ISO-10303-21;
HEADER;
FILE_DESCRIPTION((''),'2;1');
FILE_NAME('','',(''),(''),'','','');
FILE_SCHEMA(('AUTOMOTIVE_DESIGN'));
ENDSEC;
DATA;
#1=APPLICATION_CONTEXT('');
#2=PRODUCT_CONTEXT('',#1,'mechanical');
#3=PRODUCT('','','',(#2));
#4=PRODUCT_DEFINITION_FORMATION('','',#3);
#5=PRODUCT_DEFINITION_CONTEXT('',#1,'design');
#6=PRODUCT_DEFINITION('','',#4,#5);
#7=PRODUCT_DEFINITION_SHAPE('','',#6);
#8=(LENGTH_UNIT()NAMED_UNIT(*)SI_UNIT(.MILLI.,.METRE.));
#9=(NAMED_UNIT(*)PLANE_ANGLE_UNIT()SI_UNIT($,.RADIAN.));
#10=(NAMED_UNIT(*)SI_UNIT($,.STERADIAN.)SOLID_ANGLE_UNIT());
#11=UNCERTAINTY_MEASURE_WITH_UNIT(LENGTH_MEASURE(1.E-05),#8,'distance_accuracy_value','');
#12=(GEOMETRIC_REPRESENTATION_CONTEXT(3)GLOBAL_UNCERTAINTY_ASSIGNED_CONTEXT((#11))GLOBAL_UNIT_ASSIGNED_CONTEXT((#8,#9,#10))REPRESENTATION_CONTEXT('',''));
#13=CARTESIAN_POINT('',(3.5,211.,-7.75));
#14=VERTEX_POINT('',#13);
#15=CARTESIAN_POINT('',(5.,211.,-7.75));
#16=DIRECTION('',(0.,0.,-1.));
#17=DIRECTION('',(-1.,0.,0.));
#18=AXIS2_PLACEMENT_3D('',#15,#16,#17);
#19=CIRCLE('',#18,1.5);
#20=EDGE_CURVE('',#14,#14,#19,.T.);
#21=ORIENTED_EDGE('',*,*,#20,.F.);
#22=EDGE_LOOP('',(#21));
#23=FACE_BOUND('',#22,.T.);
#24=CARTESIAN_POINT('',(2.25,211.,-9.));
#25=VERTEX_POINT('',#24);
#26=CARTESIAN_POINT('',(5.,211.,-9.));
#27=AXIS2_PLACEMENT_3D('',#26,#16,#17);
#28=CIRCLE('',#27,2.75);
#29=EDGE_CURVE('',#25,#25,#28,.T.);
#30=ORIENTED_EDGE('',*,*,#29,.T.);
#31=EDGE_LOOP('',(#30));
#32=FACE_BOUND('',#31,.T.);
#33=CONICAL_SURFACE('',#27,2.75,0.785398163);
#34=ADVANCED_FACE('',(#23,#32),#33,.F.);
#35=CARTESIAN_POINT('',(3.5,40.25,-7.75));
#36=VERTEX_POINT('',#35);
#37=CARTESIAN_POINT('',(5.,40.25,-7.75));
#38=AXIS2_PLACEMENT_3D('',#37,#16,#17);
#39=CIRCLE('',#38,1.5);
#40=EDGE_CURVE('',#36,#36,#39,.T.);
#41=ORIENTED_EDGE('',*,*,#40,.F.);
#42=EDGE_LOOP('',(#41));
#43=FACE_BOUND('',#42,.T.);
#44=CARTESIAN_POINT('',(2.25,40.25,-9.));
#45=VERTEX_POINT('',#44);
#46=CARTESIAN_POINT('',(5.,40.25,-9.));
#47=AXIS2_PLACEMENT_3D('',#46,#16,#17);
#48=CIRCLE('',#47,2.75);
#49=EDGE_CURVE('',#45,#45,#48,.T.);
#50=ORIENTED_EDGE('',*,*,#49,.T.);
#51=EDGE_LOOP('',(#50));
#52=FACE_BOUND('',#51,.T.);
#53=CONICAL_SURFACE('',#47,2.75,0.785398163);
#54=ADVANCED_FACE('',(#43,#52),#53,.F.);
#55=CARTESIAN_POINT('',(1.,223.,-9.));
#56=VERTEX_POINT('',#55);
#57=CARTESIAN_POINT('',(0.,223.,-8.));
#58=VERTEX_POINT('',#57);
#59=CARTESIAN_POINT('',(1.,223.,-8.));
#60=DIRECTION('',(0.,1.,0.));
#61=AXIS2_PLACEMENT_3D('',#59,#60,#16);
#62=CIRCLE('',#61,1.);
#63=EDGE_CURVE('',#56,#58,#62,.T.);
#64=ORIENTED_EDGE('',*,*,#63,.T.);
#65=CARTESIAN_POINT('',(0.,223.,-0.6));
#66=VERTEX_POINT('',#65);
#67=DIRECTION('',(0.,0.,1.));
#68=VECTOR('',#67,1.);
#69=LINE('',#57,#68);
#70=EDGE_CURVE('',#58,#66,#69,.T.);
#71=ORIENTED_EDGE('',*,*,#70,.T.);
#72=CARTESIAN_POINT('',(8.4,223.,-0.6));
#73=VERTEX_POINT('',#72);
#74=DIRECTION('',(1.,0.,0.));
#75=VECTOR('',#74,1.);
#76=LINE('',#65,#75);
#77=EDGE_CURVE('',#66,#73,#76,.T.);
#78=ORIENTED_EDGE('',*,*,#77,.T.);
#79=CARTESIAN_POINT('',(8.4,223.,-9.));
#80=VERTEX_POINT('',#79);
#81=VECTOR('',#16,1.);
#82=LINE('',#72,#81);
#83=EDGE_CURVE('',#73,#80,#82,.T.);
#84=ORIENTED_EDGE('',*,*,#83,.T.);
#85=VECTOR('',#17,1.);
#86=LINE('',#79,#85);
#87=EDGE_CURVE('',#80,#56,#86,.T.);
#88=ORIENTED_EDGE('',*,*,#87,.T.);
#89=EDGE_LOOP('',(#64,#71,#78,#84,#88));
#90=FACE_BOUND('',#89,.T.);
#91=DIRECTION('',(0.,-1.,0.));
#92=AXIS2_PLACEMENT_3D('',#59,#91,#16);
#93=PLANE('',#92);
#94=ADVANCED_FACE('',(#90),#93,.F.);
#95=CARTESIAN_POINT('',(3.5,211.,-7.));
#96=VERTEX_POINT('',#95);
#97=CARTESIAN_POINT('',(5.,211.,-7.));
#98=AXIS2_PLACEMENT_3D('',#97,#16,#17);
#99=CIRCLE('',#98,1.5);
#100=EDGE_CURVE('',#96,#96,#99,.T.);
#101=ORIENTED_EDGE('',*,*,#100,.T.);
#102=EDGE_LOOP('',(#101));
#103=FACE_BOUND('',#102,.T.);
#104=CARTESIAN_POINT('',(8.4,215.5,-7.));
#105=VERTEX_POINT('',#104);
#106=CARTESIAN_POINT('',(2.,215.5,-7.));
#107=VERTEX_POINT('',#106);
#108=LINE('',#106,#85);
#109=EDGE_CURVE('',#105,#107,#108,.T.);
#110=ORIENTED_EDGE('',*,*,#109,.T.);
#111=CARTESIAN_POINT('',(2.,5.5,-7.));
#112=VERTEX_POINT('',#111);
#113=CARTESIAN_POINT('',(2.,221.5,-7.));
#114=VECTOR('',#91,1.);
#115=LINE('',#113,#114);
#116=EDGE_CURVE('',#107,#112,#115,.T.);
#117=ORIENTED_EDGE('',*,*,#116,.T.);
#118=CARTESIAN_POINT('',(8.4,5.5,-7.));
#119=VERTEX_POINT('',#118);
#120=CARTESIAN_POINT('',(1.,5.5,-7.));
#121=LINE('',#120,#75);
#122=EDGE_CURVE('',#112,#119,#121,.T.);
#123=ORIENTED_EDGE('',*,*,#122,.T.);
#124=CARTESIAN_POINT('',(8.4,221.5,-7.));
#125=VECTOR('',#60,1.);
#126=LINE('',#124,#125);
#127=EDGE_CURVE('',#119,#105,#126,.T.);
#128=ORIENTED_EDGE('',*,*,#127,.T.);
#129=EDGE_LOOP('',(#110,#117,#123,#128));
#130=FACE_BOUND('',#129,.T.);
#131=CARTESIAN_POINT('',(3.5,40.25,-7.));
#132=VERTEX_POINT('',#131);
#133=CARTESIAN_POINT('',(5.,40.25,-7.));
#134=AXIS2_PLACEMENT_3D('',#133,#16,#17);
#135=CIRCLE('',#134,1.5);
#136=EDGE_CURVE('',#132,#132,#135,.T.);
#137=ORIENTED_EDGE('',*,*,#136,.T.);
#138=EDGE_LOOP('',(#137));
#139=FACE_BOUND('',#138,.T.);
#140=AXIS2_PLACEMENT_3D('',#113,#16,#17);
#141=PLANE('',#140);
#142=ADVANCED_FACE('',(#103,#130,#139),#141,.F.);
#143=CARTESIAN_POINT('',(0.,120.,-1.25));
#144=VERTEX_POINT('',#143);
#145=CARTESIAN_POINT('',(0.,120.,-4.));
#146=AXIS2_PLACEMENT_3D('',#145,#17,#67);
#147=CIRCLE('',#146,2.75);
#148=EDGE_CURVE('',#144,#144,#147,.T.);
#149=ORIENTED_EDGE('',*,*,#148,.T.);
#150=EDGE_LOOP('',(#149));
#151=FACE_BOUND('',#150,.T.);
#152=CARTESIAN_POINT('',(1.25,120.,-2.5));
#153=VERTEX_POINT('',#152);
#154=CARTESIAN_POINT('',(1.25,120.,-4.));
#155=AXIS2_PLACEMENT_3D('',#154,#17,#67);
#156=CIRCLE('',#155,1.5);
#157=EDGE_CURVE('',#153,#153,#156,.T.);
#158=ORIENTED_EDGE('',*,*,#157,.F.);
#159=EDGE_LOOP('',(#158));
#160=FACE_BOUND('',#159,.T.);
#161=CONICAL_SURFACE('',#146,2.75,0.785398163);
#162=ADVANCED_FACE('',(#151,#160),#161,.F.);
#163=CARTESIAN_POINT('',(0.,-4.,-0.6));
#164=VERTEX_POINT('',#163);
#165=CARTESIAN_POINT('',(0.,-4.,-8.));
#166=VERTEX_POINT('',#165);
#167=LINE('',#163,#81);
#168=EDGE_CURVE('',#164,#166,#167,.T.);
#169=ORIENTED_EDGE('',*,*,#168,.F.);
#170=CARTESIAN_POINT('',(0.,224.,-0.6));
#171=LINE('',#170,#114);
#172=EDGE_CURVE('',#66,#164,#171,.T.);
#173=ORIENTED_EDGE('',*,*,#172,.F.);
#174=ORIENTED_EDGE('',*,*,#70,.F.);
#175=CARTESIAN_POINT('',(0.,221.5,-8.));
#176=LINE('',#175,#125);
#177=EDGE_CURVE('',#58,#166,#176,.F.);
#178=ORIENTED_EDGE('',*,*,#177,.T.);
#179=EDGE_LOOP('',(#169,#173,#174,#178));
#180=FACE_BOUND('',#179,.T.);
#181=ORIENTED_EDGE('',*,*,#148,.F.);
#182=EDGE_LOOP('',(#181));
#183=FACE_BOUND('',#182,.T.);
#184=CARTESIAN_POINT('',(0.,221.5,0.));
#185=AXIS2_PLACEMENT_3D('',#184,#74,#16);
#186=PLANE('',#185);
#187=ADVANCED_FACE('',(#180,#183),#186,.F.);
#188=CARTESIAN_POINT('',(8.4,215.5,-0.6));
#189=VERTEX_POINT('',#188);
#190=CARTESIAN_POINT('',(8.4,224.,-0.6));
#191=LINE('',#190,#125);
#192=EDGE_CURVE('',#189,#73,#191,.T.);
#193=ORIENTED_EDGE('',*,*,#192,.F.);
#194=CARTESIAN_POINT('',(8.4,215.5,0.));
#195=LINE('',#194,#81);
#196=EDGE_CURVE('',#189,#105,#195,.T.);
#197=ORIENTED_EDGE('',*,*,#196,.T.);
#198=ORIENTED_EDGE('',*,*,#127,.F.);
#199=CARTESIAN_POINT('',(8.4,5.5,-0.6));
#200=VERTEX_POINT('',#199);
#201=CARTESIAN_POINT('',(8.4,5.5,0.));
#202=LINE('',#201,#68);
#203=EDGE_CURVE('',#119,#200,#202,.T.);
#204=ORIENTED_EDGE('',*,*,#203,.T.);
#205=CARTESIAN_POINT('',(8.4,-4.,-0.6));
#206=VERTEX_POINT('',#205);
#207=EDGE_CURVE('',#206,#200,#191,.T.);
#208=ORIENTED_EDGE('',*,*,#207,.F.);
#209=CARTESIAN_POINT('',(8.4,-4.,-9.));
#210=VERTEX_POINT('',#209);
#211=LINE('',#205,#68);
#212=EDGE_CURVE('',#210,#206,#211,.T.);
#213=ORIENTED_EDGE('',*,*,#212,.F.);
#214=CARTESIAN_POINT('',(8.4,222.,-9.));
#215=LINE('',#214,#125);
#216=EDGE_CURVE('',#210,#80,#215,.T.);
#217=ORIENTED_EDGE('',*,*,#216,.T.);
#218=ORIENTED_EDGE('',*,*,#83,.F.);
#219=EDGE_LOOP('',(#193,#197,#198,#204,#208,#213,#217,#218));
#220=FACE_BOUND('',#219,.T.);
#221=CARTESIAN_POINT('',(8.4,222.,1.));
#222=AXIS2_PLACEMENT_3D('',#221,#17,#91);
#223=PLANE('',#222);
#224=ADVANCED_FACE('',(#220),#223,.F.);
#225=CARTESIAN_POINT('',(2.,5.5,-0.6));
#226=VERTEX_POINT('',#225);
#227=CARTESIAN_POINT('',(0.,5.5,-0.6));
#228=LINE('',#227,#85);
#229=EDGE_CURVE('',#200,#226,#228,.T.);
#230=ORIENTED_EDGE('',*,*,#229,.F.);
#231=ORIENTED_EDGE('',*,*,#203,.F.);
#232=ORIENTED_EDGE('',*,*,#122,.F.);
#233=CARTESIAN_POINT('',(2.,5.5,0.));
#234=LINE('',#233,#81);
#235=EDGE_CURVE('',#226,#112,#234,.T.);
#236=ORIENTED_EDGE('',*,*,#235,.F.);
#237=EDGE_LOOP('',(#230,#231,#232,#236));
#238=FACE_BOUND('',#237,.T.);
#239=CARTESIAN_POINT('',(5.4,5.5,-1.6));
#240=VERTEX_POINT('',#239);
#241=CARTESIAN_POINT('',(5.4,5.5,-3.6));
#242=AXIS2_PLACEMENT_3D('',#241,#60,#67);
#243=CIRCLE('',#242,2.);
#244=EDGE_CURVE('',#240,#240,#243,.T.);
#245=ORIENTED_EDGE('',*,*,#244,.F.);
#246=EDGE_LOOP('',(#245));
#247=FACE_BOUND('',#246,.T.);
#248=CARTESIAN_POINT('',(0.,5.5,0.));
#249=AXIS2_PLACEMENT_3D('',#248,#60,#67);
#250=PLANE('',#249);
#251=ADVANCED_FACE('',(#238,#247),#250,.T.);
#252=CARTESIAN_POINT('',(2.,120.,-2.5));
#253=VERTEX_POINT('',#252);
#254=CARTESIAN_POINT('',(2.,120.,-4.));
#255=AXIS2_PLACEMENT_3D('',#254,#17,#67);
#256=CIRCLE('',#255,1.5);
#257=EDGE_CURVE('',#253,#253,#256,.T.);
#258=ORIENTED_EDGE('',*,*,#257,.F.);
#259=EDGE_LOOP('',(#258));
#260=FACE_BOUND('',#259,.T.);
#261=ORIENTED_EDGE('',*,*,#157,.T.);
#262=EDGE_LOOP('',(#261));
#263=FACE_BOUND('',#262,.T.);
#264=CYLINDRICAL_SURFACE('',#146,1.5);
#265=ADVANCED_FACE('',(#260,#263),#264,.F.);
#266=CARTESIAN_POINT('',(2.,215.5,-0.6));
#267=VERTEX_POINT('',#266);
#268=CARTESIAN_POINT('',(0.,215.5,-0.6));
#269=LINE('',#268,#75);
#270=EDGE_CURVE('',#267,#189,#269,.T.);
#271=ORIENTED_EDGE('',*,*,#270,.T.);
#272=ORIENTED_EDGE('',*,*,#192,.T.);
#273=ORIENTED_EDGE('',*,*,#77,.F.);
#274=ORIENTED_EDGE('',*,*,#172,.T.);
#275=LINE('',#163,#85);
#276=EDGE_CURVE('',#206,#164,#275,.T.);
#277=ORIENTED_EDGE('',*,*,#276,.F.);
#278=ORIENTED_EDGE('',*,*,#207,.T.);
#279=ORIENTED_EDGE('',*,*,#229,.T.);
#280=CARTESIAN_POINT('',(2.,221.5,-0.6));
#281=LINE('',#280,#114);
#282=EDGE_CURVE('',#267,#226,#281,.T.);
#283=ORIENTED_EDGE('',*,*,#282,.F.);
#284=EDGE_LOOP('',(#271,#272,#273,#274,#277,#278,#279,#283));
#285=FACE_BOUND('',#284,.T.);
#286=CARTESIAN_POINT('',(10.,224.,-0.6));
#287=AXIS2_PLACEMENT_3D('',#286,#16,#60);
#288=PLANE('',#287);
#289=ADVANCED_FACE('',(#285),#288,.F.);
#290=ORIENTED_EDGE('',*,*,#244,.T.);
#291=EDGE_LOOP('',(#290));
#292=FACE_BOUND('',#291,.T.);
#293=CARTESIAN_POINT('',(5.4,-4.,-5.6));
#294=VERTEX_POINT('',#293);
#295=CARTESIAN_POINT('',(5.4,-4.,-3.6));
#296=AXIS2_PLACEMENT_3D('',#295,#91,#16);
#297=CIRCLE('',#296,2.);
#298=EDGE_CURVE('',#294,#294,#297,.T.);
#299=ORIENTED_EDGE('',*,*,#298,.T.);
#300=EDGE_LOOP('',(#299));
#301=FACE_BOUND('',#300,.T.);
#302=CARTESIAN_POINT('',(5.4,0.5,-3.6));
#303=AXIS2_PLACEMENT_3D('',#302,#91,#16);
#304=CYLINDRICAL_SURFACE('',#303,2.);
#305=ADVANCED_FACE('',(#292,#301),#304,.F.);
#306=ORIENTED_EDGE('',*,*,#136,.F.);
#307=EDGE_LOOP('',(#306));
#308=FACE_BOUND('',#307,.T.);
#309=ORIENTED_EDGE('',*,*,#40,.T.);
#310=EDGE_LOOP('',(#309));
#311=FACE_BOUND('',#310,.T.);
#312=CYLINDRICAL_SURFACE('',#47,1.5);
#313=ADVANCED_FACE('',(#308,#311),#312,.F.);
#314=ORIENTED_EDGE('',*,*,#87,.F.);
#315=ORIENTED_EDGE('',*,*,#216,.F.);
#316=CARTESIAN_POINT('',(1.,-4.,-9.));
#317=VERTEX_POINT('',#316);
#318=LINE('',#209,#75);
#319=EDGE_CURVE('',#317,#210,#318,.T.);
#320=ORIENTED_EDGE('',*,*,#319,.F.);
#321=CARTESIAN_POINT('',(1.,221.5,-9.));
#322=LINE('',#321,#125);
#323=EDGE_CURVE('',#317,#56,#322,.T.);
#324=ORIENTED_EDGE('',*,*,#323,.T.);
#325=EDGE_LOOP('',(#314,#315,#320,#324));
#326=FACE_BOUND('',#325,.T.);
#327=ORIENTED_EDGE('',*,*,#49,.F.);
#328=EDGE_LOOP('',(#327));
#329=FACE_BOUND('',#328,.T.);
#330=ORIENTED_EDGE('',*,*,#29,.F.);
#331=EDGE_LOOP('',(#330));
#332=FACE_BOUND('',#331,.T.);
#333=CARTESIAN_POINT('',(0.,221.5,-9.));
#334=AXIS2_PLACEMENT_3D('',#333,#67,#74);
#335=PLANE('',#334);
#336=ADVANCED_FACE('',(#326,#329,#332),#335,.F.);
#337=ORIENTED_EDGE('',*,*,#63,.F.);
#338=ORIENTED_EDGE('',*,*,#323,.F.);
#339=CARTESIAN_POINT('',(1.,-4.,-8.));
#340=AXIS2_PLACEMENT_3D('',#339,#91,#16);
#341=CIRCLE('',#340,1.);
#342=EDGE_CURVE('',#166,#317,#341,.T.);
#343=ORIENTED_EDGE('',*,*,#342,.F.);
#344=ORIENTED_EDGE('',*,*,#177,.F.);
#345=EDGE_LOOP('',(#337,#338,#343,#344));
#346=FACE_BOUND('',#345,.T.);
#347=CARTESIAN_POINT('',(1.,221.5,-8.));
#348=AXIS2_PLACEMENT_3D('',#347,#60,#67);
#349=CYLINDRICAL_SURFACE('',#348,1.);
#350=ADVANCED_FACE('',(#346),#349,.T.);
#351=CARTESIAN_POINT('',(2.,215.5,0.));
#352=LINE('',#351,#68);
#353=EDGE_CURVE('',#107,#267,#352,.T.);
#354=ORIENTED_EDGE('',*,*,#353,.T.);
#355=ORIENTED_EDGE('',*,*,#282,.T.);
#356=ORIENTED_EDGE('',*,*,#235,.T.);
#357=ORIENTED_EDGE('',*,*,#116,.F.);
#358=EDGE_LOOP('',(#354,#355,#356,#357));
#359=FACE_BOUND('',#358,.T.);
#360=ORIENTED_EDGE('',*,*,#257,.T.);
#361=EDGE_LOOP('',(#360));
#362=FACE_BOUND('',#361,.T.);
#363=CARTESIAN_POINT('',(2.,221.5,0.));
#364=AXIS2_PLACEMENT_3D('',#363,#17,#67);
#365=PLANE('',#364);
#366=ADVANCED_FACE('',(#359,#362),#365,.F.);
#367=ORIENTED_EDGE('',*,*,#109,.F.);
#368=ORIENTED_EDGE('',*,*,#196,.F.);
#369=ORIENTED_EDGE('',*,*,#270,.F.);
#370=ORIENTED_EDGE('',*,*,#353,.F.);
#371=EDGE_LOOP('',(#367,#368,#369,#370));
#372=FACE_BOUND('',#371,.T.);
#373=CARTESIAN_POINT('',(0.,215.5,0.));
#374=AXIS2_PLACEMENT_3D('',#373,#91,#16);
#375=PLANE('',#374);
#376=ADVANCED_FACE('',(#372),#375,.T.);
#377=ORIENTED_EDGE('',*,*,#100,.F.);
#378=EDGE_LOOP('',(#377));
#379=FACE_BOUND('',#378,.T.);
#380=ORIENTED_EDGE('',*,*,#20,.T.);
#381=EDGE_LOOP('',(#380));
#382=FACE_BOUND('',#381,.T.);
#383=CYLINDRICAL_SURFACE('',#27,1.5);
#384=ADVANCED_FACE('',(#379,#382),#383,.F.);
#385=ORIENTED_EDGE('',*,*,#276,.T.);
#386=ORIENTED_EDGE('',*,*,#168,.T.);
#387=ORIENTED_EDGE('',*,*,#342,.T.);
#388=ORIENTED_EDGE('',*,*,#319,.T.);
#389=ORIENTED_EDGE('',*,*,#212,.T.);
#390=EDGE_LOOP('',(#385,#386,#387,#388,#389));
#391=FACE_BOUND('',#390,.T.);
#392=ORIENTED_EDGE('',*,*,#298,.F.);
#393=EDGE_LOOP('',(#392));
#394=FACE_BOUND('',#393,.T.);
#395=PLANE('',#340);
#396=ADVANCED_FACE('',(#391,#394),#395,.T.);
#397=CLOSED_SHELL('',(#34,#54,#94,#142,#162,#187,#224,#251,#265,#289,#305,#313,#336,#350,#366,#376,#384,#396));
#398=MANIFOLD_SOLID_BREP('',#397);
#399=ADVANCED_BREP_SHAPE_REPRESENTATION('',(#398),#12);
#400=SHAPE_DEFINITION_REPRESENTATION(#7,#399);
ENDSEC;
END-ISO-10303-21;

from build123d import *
from build123d.topology import SkipClean

# Parameters (mm, degrees)
BOSS_EXTRUDE1_DEPTH                                 = 221.5
CSK_FOR_M3_COUNTERSUNK_FLAT_HEAD_SCREW1_D           = 3
CSK_FOR_M3_COUNTERSUNK_FLAT_HEAD_SCREW1_CSINK_D     = 5.5
CSK_FOR_M3_COUNTERSUNK_FLAT_HEAD_SCREW1_CSINK_ANGLE = 90
CSK_FOR_M3_COUNTERSUNK_FLAT_HEAD_SCREW4_D           = 3
CSK_FOR_M3_COUNTERSUNK_FLAT_HEAD_SCREW4_CSINK_D     = 5.5
CSK_FOR_M3_COUNTERSUNK_FLAT_HEAD_SCREW4_CSINK_ANGLE = 90
SKETCH12_W                                          = 8
SKETCH12_H                                          = 7
BOSS_EXTRUDE2_DEPTH                                 = 5.5
CUT_EXTRUDE1_DEPTH                                  = 359
BOSS_EXTRUDE3_DEPTH                                 = 3
BOSS_EXTRUDE4_DEPTH                                 = 2.5
BOSS_EXTRUDE4_DEPTH_BACK                            = 6
SKETCH19_W                                          = 0.6
SKETCH19_H                                          = 227
CUT_EXTRUDE2_DEPTH                                  = 10
SKETCH20_W                                          = 15.604741464
SKETCH20_H                                          = 2
CUT_EXTRUDE3_DEPTH                                  = 10
SKETCH21_W                                          = 0.6
SKETCH21_H                                          = 225
CUT_EXTRUDE4_DEPTH                                  = 10
SKETCH22_W                                          = 8.4
SKETCH22_H                                          = 5.5
CUT_EXTRUDE5_DEPTH                                  = 10
BOSS_EXTRUDE5_DEPTH                                 = 2
TAP_DRILL_FOR_M4X0_7_TAP1_D                         = 4
TAP_DRILL_FOR_M4X0_7_TAP1_DEPTH                     = 5
BOSS_EXTRUDE6_DEPTH                                 = 221.5
FILLET1_R                                           = 1
SKETCH30_R                                          = 2
BOSS_EXTRUDE7_DEPTH                                 = 4.5
BOSS_EXTRUDE8_DEPTH                                 = 1


with BuildPart() as part:
    # Sketch1 → Boss-Extrude1 (new body)
    with BuildSketch(Plane(origin=(0, 0, 0), x_dir=(1, 0, 0), z_dir=(0, 1, 0))):
        Polygon((0, 0), (0, 9), (9, 9), (9, 7), (2, 7), (2, 0), align=None)
    extrude(amount=BOSS_EXTRUDE1_DEPTH)

    # CSK for M3 Countersunk Flat Head Screw1 (through all)
    with Locations(Plane.ZY):
        with Locations((-4, 120)):
            CounterSinkHole(CSK_FOR_M3_COUNTERSUNK_FLAT_HEAD_SCREW1_D / 2, CSK_FOR_M3_COUNTERSUNK_FLAT_HEAD_SCREW1_CSINK_D / 2, counter_sink_angle=CSK_FOR_M3_COUNTERSUNK_FLAT_HEAD_SCREW1_CSINK_ANGLE)

    # CSK for M3 Countersunk Flat Head Screw4 (through all)
    with Locations(Plane(origin=(0, 0, -9), x_dir=(-1, 0, 0), z_dir=(0, 0, -1))):
        with Locations((-5, 40.25), (-5, 211)):
            CounterSinkHole(CSK_FOR_M3_COUNTERSUNK_FLAT_HEAD_SCREW4_D / 2, CSK_FOR_M3_COUNTERSUNK_FLAT_HEAD_SCREW4_CSINK_D / 2, counter_sink_angle=CSK_FOR_M3_COUNTERSUNK_FLAT_HEAD_SCREW4_CSINK_ANGLE)

    # Sketch12 → Boss-Extrude2 (add)
    with BuildSketch(Plane.XZ):
        with Locations((5, -3.5)):
            Rectangle(SKETCH12_W, SKETCH12_H)
    extrude(amount=-BOSS_EXTRUDE2_DEPTH)

    # Sketch13 → Cut-Extrude1 (cut)
    with BuildSketch(Plane(origin=(0, 221.5, 0), x_dir=(1, 0, 0), z_dir=(0, 1, 0))):
        Polygon((0, 8), (1, 9), (0, 9), align=None)
    extrude(amount=-CUT_EXTRUDE1_DEPTH, mode=Mode.SUBTRACT)

    # Sketch14 → Boss-Extrude3 (add)
    with BuildSketch(Plane.XZ):
        Polygon((0, 0), (9, 0), (9, -9), (1, -9), (0, -8), align=None)
    extrude(amount=BOSS_EXTRUDE3_DEPTH)

    # Sketch18 → Boss-Extrude4 (add, two sides: drawn at the far end of the back side and taken through both)
    with BuildSketch(Plane(origin=(0, 221.5, 0), x_dir=(1, 0, 0), z_dir=(0, 1, 0)).offset(-BOSS_EXTRUDE4_DEPTH_BACK)):
        Polygon((0, 0), (9, 0), (9, 9), (1, 9), (0, 8), align=None)
    extrude(amount=BOSS_EXTRUDE4_DEPTH + BOSS_EXTRUDE4_DEPTH_BACK)

    # Sketch19 → Cut-Extrude2 (cut)
    with BuildSketch(Plane.ZY):
        with Locations((-0.3, 110.5)):
            Rectangle(SKETCH19_W, SKETCH19_H)
    extrude(amount=-CUT_EXTRUDE2_DEPTH, mode=Mode.SUBTRACT)

    # Sketch20 → Cut-Extrude3 (cut)
    with BuildSketch(Plane.ZY):
        with Locations((-8.402370732, 223)):
            Rectangle(SKETCH20_W, SKETCH20_H)
    extrude(amount=-CUT_EXTRUDE3_DEPTH, mode=Mode.SUBTRACT)

    # Sketch21 → Cut-Extrude4 (cut)
    with BuildSketch(Plane(origin=(0, 0, -9), x_dir=(-1, 0, 0), z_dir=(0, 0, -1))):
        with Locations((-8.7, 109.5)):
            Rectangle(SKETCH21_W, SKETCH21_H)
    extrude(amount=-CUT_EXTRUDE4_DEPTH, mode=Mode.SUBTRACT)

    # Sketch22 → Cut-Extrude5 (cut)
    with BuildSketch(Plane(origin=(0, 0, -9), x_dir=(-1, 0, 0), z_dir=(0, 0, -1))):
        with Locations((-4.2, -0.25)):
            Rectangle(SKETCH22_W, SKETCH22_H)
    extrude(amount=-CUT_EXTRUDE5_DEPTH, mode=Mode.SUBTRACT)

    # Sketch26 → Boss-Extrude5 (add)
    with BuildSketch(Plane.XZ.offset(-2.5)):
        Polygon((8.4, -9), (8.4, -0.6), (0, -0.6), (0, -8), (1, -9), align=None)
    extrude(amount=BOSS_EXTRUDE5_DEPTH)

    # Tap Drill for M4x0.7 Tap1
    with Locations(Plane(origin=(0, 0.5, 0), x_dir=(-1, 0, 0), z_dir=(0, -1, 0))):
        with Locations((-5.4, 3.6)):
            Hole(TAP_DRILL_FOR_M4X0_7_TAP1_D / 2, depth=TAP_DRILL_FOR_M4X0_7_TAP1_DEPTH)

    # Sketch29 → Boss-Extrude6 (add)
    with BuildSketch(Plane(origin=(0, 222, 0), x_dir=(1, 0, 0), z_dir=(0, 1, 0))):
        Polygon((0, 8), (1, 9), (0, 9), align=None)
    extrude(amount=-BOSS_EXTRUDE6_DEPTH)

    # Fillet1
    fillet1_edges = [part.edges().sort_by_distance(p)[0] for p in [
        (0, 111.25, -9),
    ]]
    fillet(fillet1_edges, radius=FILLET1_R)

    # Sketch30 → Boss-Extrude7 (add)
    with SkipClean():  # the faces are left unmerged after this step: merging them gives an invalid solid
        with BuildSketch(Plane.XZ.offset(-0.5)):
            with BuildLine():
                Line((0, -0.6), (8.4, -0.6))
                Line((8.4, -0.6), (8.4, -9))
                Line((8.4, -9), (1, -9))
                ThreePointArc((1, -9), (0.292893219, -8.707106781), (0, -8))
                Line((0, -8), (0, -0.6))
            make_face()
            with Locations(Location((5.4, -3.6, 0), (0, 0, 270))):
                Circle(SKETCH30_R, mode=Mode.SUBTRACT)
        extrude(amount=BOSS_EXTRUDE7_DEPTH)
    add(part.part.scale(1), mode=Mode.REPLACE)  # the faces are merged on a copy

    # Sketch32 → Boss-Extrude8 (add)
    with SkipClean():  # the faces are left unmerged after this step: merging them gives an invalid solid
        with BuildSketch(Plane(origin=(0, 222, 0), x_dir=(1, 0, 0), z_dir=(0, 1, 0))):
            with BuildLine():
                Line((0, 0.6), (8.4, 0.6))
                Line((8.4, 0.6), (8.4, 9))
                Line((8.4, 9), (1, 9))
                ThreePointArc((1, 9), (0.292893219, 8.707106781), (0, 8))
                Line((0, 8), (0, 0.6))
            make_face()
        extrude(amount=BOSS_EXTRUDE8_DEPTH)


solid = part.part
